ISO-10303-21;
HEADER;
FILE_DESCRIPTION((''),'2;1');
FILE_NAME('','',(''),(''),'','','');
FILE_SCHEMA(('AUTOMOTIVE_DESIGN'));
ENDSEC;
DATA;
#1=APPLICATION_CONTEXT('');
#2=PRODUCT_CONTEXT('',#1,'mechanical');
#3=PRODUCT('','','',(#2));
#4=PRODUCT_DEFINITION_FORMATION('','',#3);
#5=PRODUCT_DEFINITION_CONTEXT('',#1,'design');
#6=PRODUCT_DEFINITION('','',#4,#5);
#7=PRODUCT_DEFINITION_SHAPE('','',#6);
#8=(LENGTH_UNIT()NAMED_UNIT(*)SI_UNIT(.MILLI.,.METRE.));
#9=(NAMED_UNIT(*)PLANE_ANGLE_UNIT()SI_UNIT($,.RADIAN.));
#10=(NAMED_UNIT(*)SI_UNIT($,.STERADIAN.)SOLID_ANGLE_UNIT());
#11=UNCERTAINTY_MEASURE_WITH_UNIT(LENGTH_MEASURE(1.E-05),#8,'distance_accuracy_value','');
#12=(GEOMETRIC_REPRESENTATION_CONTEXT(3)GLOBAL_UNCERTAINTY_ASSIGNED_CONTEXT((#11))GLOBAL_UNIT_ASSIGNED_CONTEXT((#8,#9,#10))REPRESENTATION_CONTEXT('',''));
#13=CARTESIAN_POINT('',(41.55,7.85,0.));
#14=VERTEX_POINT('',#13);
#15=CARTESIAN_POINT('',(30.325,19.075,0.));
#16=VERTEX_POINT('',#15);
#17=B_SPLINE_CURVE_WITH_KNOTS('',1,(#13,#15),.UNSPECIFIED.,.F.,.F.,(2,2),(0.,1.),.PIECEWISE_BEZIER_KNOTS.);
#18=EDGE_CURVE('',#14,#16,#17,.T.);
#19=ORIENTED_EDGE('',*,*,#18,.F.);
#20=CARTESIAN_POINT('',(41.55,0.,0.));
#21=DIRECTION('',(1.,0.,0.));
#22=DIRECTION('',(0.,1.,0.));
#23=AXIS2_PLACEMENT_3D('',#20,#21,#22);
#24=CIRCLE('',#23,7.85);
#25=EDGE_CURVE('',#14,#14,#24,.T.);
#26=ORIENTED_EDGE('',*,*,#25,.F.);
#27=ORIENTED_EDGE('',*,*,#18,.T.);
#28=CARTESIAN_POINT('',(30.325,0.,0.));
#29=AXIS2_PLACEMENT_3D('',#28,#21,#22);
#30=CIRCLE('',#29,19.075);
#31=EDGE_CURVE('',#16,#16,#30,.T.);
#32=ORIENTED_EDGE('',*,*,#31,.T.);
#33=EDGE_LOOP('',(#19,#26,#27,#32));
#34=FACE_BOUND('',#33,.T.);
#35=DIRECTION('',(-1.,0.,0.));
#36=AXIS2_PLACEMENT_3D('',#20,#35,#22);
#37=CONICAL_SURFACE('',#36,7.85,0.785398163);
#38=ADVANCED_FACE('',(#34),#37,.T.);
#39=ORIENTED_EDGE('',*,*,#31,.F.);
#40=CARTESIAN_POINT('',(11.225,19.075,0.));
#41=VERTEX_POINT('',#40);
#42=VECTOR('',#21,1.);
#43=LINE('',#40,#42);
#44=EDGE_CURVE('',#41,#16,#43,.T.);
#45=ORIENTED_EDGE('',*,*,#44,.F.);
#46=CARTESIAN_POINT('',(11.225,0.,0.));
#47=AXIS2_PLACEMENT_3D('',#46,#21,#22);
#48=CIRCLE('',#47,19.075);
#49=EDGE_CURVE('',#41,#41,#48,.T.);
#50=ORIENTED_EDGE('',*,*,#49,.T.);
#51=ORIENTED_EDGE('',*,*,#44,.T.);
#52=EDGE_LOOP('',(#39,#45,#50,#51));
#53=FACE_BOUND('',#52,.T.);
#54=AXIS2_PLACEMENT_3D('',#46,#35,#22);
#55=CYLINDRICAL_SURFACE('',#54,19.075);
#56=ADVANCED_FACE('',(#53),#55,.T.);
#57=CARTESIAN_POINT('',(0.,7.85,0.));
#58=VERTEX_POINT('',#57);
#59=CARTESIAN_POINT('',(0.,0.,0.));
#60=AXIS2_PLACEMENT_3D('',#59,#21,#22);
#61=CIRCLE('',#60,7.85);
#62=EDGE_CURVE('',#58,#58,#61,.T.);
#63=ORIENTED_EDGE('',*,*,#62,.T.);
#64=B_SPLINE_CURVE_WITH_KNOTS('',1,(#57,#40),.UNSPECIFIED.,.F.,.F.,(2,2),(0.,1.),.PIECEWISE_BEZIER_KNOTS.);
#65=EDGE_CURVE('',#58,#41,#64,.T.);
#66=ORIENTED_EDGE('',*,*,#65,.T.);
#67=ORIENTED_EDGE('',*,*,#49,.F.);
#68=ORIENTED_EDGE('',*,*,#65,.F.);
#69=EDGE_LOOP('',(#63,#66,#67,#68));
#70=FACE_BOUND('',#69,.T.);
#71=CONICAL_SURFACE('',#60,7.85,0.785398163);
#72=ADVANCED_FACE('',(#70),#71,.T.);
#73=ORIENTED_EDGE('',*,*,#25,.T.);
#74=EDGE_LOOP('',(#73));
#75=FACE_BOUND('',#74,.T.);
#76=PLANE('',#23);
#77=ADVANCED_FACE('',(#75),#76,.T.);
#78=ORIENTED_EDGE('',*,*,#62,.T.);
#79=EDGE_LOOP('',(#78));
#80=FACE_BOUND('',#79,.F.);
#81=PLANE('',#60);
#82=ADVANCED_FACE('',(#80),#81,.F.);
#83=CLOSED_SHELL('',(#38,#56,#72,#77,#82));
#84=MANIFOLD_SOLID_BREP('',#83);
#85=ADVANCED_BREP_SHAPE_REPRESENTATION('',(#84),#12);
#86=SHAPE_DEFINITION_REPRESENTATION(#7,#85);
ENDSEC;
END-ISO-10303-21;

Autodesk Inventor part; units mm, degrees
ref_plane "XZ Plane" through (0, 0, 0) normal (0, 1, 0) x (-1, 0, 0)
ref_plane "XY Plane" through (0, 0, 0) normal (0, 0, 1) x (1, 0, 0)
sketch "Boceto1" plane through (0, 0, 0) normal (1, 0, 0) x (0, 1, 0)
  circle A0 centre (0, 0) radius 7.85
  dimension "d0" = 15.7
ref_plane "Plano de trabajo1" through (11.225, 0, 0) normal (1, 0, 0) x (0, 1, 0)
sketch "Boceto2" plane through (11.225, 0, 0) normal (1, 0, 0) x (0, 1, 0)
  circle A0 centre (0, 0) radius 19.075
  dimension "d2" = 38.15
ref_plane "Plano de trabajo2" through (30.325, 0, 0) normal (1, 0, 0) x (0, 1, 0)
sketch "Boceto3" plane through (30.325, 0, 0) normal (1, 0, 0) x (0, 1, 0)
  point P0 (0, 0)
ref_plane "Plano de trabajo3" through (41.55, 0, 0) normal (1, 0, 0) x (0, 1, 0)
sketch "Boceto4" plane through (41.55, 0, 0) normal (1, 0, 0) x (0, 1, 0)
  circle A0 centre (0, 0) radius 7.85
  dimension "d6" = 15.7
extrude "Extrusión1" add sketch "Boceto2" along normal blind 19.1
extrude "Extrusión2" add sketch "Boceto1" along normal blind 15
extrude "Extrusión3" add sketch "Boceto4" against normal blind 15
loft "Solevación1" add section 1 edges at (41.55, -7.85, 0) section 2 edges at (30.325, -19.075, 0)
loft "Solevación2" add section 1 edges at (0, -7.85, 0) section 2 edges at (11.225, -19.075, 0)
properties part number "PESAS BAILARINA"
